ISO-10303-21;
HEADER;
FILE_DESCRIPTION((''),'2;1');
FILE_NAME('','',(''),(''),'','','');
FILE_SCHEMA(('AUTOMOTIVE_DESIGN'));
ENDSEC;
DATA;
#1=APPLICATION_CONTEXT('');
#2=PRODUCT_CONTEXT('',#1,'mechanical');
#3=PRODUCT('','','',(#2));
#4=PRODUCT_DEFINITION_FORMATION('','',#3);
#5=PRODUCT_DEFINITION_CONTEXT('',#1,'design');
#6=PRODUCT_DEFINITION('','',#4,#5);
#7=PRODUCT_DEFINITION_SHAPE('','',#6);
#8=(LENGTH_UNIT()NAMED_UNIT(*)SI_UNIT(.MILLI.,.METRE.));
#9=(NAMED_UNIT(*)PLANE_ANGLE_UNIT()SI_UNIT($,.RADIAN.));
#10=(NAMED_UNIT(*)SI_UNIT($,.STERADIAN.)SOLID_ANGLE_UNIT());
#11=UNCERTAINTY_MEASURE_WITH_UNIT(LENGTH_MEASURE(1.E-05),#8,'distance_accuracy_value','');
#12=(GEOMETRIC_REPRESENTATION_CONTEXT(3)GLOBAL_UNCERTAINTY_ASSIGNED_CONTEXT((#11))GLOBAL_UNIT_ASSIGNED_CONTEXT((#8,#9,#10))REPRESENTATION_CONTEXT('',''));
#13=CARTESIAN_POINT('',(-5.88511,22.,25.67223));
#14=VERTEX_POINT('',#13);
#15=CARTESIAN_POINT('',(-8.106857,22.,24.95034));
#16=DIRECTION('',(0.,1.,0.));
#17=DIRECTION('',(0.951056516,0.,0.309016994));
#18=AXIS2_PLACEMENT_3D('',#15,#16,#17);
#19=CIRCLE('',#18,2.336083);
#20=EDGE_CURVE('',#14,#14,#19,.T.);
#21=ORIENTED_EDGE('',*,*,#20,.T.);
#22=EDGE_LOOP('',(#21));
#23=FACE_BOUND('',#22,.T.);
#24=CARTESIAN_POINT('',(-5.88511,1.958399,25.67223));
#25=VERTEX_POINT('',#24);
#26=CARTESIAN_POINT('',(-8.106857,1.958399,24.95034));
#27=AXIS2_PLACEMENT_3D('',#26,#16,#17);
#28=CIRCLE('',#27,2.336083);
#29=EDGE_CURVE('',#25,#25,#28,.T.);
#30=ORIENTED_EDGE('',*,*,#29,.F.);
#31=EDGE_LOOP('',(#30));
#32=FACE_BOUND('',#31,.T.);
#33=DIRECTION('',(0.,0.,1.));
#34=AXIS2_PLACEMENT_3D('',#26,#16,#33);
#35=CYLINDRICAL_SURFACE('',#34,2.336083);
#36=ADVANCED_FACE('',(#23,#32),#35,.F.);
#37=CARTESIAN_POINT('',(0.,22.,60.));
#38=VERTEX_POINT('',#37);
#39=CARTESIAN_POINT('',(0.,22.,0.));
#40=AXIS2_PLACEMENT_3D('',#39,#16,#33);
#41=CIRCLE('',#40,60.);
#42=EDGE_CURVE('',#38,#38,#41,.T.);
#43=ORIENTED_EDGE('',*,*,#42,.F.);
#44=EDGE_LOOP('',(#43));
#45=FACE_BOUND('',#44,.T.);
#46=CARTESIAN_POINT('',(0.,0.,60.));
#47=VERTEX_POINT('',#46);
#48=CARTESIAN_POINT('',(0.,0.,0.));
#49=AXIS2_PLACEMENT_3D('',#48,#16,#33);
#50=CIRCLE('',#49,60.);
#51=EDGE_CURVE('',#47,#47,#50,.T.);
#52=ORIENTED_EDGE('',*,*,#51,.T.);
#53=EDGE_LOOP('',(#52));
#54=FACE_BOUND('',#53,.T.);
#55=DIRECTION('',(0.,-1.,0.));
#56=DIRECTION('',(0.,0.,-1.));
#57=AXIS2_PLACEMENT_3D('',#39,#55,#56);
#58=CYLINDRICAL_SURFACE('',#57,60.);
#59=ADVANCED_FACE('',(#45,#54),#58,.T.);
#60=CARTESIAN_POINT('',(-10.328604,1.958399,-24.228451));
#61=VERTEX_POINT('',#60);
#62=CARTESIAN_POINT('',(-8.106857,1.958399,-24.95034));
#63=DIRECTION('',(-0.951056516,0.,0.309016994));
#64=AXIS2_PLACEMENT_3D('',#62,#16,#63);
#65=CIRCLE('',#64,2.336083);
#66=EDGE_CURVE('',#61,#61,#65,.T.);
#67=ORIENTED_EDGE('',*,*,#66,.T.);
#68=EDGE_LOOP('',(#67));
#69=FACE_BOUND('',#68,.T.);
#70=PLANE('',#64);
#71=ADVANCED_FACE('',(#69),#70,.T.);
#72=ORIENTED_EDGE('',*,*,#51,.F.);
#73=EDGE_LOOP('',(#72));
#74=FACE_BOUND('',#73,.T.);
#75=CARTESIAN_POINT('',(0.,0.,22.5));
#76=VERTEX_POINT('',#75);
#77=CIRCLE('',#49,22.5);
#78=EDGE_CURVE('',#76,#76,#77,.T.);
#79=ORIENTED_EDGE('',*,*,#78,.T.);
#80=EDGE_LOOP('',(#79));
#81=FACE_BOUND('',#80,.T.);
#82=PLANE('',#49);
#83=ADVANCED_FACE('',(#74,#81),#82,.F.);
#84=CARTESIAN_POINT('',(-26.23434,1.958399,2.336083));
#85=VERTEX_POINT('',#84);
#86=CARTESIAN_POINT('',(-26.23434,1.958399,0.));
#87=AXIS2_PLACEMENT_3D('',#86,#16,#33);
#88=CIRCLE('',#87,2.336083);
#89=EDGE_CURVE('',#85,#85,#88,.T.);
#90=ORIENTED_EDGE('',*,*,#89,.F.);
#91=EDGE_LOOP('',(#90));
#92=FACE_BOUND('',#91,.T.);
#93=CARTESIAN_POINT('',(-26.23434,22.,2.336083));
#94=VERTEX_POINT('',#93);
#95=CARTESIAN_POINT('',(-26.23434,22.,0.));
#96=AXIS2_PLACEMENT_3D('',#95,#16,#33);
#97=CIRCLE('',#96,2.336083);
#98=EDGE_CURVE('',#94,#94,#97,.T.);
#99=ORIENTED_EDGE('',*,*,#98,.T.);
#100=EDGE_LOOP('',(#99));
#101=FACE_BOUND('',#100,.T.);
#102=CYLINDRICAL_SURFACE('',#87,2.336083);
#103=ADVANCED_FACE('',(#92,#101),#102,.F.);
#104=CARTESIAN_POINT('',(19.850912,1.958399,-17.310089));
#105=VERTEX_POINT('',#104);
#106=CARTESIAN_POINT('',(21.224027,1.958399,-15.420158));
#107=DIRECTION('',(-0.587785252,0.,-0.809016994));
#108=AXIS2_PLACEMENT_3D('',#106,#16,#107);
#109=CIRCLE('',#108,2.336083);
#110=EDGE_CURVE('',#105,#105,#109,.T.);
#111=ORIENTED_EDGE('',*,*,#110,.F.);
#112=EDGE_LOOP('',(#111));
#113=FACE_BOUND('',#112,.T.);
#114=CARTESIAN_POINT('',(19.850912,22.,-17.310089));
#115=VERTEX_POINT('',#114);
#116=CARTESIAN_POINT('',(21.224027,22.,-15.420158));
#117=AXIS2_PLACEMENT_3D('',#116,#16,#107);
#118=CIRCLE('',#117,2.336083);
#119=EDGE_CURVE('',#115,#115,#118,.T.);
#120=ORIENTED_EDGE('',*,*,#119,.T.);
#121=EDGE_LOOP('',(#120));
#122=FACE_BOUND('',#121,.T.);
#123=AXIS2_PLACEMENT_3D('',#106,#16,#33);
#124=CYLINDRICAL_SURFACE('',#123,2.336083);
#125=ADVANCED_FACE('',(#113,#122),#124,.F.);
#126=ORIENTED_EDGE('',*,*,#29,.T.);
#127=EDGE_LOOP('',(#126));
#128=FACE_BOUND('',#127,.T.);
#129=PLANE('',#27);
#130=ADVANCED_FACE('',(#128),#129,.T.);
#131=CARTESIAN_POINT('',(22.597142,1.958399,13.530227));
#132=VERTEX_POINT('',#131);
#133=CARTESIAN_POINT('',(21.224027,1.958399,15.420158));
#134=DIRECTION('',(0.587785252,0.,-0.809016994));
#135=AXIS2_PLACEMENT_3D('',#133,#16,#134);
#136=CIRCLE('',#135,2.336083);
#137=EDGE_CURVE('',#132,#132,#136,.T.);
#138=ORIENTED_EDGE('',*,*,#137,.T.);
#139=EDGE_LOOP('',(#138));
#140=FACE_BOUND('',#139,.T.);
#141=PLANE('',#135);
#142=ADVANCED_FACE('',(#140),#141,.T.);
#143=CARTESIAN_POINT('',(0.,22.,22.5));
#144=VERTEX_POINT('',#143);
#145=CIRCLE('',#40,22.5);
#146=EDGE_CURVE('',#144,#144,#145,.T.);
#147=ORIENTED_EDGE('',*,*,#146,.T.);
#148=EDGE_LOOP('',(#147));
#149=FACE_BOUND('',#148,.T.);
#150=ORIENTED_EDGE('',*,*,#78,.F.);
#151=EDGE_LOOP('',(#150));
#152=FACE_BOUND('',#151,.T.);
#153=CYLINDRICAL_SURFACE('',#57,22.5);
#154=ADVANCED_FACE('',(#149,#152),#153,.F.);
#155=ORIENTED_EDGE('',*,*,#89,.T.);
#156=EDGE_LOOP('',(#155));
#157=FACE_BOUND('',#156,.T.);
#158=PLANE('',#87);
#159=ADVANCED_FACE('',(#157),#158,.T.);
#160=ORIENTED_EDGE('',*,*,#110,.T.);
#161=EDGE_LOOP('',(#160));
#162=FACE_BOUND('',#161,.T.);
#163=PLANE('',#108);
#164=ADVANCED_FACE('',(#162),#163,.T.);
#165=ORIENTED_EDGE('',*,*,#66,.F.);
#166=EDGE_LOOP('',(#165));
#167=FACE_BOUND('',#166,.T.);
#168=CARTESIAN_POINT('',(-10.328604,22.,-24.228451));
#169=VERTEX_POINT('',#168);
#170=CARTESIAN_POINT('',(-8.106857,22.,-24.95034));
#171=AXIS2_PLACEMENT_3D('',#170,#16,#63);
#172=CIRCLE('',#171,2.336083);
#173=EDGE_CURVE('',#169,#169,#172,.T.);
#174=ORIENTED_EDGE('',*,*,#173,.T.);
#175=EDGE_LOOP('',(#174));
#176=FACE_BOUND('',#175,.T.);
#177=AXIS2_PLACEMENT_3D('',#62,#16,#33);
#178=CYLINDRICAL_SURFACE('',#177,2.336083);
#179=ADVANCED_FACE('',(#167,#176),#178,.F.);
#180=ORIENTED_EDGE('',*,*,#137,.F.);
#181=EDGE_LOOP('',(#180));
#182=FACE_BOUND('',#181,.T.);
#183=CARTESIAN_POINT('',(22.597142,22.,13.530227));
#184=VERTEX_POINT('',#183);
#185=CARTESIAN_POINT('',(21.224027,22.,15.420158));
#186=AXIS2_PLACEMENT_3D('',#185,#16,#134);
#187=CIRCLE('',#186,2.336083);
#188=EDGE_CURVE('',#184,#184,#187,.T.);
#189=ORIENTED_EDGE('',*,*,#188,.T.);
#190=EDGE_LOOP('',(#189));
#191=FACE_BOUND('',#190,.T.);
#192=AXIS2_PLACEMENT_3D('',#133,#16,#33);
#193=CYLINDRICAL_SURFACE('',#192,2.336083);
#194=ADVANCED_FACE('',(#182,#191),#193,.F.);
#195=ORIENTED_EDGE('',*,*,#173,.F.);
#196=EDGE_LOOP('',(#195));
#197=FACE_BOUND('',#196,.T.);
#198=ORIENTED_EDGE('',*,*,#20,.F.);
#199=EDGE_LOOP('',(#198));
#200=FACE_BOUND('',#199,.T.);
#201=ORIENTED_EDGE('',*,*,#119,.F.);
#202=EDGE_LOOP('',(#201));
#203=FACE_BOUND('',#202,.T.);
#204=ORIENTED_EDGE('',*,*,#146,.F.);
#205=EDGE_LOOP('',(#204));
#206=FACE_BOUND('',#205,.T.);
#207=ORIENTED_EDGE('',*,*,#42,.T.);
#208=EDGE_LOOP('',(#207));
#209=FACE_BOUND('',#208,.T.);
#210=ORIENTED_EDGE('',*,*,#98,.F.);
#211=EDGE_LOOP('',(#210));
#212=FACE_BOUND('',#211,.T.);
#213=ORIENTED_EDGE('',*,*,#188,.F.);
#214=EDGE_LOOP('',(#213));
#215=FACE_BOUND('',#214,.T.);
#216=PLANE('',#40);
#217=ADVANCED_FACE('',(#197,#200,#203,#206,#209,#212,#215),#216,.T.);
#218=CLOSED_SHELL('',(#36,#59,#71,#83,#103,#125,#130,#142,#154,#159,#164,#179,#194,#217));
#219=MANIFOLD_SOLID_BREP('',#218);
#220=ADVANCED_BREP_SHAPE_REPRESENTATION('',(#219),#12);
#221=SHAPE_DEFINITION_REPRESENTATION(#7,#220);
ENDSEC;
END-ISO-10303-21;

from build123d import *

# Parameters (mm, degrees)
SKETCH1_R           = 60
BOSS_EXTRUDE1_DEPTH = 22
SKETCH2_R           = 22.5
CUT_EXTRUDE1_DEPTH  = 88.658428003
SKETCH3_R           = 2.336083274
CUT_EXTRUDE2_DEPTH  = 20.04160133
CIRPATTERN1_COUNT   = 5


with BuildPart() as part:
    # Sketch1 → Boss-Extrude1 (new body)
    with BuildSketch(Plane(origin=(0, 0, 0), x_dir=(1, 0, 0), z_dir=(0, 1, 0))):
        Circle(SKETCH1_R)
    extrude(amount=BOSS_EXTRUDE1_DEPTH)

    # Sketch2 → Cut-Extrude1 (cut, through all)
    with BuildSketch(Plane(origin=(0, 0, 0), x_dir=(1, 0, 0), z_dir=(0, 1, 0))):
        Circle(SKETCH2_R)
    extrude(amount=CUT_EXTRUDE1_DEPTH, mode=Mode.SUBTRACT)

    # Sketch3 → Cut-Extrude2 (cut)
    with BuildSketch(Plane(origin=(0, 22, 0), x_dir=(1, 0, 0), z_dir=(0, 1, 0))):
        with Locations((-26.234340362, 0)):
            Circle(SKETCH3_R)
    cut_extrude2 = extrude(amount=-CUT_EXTRUDE2_DEPTH, mode=Mode.SUBTRACT)

    # CirPattern1: Cut-Extrude2 ×5 about axis
    cirpattern1_axis = Axis((0, 0, 0), (0, 1, 0))
    for i in range(1, CIRPATTERN1_COUNT):
        add(cut_extrude2.rotate(cirpattern1_axis, i * 360 / CIRPATTERN1_COUNT), mode=Mode.SUBTRACT)


solid = part.part
